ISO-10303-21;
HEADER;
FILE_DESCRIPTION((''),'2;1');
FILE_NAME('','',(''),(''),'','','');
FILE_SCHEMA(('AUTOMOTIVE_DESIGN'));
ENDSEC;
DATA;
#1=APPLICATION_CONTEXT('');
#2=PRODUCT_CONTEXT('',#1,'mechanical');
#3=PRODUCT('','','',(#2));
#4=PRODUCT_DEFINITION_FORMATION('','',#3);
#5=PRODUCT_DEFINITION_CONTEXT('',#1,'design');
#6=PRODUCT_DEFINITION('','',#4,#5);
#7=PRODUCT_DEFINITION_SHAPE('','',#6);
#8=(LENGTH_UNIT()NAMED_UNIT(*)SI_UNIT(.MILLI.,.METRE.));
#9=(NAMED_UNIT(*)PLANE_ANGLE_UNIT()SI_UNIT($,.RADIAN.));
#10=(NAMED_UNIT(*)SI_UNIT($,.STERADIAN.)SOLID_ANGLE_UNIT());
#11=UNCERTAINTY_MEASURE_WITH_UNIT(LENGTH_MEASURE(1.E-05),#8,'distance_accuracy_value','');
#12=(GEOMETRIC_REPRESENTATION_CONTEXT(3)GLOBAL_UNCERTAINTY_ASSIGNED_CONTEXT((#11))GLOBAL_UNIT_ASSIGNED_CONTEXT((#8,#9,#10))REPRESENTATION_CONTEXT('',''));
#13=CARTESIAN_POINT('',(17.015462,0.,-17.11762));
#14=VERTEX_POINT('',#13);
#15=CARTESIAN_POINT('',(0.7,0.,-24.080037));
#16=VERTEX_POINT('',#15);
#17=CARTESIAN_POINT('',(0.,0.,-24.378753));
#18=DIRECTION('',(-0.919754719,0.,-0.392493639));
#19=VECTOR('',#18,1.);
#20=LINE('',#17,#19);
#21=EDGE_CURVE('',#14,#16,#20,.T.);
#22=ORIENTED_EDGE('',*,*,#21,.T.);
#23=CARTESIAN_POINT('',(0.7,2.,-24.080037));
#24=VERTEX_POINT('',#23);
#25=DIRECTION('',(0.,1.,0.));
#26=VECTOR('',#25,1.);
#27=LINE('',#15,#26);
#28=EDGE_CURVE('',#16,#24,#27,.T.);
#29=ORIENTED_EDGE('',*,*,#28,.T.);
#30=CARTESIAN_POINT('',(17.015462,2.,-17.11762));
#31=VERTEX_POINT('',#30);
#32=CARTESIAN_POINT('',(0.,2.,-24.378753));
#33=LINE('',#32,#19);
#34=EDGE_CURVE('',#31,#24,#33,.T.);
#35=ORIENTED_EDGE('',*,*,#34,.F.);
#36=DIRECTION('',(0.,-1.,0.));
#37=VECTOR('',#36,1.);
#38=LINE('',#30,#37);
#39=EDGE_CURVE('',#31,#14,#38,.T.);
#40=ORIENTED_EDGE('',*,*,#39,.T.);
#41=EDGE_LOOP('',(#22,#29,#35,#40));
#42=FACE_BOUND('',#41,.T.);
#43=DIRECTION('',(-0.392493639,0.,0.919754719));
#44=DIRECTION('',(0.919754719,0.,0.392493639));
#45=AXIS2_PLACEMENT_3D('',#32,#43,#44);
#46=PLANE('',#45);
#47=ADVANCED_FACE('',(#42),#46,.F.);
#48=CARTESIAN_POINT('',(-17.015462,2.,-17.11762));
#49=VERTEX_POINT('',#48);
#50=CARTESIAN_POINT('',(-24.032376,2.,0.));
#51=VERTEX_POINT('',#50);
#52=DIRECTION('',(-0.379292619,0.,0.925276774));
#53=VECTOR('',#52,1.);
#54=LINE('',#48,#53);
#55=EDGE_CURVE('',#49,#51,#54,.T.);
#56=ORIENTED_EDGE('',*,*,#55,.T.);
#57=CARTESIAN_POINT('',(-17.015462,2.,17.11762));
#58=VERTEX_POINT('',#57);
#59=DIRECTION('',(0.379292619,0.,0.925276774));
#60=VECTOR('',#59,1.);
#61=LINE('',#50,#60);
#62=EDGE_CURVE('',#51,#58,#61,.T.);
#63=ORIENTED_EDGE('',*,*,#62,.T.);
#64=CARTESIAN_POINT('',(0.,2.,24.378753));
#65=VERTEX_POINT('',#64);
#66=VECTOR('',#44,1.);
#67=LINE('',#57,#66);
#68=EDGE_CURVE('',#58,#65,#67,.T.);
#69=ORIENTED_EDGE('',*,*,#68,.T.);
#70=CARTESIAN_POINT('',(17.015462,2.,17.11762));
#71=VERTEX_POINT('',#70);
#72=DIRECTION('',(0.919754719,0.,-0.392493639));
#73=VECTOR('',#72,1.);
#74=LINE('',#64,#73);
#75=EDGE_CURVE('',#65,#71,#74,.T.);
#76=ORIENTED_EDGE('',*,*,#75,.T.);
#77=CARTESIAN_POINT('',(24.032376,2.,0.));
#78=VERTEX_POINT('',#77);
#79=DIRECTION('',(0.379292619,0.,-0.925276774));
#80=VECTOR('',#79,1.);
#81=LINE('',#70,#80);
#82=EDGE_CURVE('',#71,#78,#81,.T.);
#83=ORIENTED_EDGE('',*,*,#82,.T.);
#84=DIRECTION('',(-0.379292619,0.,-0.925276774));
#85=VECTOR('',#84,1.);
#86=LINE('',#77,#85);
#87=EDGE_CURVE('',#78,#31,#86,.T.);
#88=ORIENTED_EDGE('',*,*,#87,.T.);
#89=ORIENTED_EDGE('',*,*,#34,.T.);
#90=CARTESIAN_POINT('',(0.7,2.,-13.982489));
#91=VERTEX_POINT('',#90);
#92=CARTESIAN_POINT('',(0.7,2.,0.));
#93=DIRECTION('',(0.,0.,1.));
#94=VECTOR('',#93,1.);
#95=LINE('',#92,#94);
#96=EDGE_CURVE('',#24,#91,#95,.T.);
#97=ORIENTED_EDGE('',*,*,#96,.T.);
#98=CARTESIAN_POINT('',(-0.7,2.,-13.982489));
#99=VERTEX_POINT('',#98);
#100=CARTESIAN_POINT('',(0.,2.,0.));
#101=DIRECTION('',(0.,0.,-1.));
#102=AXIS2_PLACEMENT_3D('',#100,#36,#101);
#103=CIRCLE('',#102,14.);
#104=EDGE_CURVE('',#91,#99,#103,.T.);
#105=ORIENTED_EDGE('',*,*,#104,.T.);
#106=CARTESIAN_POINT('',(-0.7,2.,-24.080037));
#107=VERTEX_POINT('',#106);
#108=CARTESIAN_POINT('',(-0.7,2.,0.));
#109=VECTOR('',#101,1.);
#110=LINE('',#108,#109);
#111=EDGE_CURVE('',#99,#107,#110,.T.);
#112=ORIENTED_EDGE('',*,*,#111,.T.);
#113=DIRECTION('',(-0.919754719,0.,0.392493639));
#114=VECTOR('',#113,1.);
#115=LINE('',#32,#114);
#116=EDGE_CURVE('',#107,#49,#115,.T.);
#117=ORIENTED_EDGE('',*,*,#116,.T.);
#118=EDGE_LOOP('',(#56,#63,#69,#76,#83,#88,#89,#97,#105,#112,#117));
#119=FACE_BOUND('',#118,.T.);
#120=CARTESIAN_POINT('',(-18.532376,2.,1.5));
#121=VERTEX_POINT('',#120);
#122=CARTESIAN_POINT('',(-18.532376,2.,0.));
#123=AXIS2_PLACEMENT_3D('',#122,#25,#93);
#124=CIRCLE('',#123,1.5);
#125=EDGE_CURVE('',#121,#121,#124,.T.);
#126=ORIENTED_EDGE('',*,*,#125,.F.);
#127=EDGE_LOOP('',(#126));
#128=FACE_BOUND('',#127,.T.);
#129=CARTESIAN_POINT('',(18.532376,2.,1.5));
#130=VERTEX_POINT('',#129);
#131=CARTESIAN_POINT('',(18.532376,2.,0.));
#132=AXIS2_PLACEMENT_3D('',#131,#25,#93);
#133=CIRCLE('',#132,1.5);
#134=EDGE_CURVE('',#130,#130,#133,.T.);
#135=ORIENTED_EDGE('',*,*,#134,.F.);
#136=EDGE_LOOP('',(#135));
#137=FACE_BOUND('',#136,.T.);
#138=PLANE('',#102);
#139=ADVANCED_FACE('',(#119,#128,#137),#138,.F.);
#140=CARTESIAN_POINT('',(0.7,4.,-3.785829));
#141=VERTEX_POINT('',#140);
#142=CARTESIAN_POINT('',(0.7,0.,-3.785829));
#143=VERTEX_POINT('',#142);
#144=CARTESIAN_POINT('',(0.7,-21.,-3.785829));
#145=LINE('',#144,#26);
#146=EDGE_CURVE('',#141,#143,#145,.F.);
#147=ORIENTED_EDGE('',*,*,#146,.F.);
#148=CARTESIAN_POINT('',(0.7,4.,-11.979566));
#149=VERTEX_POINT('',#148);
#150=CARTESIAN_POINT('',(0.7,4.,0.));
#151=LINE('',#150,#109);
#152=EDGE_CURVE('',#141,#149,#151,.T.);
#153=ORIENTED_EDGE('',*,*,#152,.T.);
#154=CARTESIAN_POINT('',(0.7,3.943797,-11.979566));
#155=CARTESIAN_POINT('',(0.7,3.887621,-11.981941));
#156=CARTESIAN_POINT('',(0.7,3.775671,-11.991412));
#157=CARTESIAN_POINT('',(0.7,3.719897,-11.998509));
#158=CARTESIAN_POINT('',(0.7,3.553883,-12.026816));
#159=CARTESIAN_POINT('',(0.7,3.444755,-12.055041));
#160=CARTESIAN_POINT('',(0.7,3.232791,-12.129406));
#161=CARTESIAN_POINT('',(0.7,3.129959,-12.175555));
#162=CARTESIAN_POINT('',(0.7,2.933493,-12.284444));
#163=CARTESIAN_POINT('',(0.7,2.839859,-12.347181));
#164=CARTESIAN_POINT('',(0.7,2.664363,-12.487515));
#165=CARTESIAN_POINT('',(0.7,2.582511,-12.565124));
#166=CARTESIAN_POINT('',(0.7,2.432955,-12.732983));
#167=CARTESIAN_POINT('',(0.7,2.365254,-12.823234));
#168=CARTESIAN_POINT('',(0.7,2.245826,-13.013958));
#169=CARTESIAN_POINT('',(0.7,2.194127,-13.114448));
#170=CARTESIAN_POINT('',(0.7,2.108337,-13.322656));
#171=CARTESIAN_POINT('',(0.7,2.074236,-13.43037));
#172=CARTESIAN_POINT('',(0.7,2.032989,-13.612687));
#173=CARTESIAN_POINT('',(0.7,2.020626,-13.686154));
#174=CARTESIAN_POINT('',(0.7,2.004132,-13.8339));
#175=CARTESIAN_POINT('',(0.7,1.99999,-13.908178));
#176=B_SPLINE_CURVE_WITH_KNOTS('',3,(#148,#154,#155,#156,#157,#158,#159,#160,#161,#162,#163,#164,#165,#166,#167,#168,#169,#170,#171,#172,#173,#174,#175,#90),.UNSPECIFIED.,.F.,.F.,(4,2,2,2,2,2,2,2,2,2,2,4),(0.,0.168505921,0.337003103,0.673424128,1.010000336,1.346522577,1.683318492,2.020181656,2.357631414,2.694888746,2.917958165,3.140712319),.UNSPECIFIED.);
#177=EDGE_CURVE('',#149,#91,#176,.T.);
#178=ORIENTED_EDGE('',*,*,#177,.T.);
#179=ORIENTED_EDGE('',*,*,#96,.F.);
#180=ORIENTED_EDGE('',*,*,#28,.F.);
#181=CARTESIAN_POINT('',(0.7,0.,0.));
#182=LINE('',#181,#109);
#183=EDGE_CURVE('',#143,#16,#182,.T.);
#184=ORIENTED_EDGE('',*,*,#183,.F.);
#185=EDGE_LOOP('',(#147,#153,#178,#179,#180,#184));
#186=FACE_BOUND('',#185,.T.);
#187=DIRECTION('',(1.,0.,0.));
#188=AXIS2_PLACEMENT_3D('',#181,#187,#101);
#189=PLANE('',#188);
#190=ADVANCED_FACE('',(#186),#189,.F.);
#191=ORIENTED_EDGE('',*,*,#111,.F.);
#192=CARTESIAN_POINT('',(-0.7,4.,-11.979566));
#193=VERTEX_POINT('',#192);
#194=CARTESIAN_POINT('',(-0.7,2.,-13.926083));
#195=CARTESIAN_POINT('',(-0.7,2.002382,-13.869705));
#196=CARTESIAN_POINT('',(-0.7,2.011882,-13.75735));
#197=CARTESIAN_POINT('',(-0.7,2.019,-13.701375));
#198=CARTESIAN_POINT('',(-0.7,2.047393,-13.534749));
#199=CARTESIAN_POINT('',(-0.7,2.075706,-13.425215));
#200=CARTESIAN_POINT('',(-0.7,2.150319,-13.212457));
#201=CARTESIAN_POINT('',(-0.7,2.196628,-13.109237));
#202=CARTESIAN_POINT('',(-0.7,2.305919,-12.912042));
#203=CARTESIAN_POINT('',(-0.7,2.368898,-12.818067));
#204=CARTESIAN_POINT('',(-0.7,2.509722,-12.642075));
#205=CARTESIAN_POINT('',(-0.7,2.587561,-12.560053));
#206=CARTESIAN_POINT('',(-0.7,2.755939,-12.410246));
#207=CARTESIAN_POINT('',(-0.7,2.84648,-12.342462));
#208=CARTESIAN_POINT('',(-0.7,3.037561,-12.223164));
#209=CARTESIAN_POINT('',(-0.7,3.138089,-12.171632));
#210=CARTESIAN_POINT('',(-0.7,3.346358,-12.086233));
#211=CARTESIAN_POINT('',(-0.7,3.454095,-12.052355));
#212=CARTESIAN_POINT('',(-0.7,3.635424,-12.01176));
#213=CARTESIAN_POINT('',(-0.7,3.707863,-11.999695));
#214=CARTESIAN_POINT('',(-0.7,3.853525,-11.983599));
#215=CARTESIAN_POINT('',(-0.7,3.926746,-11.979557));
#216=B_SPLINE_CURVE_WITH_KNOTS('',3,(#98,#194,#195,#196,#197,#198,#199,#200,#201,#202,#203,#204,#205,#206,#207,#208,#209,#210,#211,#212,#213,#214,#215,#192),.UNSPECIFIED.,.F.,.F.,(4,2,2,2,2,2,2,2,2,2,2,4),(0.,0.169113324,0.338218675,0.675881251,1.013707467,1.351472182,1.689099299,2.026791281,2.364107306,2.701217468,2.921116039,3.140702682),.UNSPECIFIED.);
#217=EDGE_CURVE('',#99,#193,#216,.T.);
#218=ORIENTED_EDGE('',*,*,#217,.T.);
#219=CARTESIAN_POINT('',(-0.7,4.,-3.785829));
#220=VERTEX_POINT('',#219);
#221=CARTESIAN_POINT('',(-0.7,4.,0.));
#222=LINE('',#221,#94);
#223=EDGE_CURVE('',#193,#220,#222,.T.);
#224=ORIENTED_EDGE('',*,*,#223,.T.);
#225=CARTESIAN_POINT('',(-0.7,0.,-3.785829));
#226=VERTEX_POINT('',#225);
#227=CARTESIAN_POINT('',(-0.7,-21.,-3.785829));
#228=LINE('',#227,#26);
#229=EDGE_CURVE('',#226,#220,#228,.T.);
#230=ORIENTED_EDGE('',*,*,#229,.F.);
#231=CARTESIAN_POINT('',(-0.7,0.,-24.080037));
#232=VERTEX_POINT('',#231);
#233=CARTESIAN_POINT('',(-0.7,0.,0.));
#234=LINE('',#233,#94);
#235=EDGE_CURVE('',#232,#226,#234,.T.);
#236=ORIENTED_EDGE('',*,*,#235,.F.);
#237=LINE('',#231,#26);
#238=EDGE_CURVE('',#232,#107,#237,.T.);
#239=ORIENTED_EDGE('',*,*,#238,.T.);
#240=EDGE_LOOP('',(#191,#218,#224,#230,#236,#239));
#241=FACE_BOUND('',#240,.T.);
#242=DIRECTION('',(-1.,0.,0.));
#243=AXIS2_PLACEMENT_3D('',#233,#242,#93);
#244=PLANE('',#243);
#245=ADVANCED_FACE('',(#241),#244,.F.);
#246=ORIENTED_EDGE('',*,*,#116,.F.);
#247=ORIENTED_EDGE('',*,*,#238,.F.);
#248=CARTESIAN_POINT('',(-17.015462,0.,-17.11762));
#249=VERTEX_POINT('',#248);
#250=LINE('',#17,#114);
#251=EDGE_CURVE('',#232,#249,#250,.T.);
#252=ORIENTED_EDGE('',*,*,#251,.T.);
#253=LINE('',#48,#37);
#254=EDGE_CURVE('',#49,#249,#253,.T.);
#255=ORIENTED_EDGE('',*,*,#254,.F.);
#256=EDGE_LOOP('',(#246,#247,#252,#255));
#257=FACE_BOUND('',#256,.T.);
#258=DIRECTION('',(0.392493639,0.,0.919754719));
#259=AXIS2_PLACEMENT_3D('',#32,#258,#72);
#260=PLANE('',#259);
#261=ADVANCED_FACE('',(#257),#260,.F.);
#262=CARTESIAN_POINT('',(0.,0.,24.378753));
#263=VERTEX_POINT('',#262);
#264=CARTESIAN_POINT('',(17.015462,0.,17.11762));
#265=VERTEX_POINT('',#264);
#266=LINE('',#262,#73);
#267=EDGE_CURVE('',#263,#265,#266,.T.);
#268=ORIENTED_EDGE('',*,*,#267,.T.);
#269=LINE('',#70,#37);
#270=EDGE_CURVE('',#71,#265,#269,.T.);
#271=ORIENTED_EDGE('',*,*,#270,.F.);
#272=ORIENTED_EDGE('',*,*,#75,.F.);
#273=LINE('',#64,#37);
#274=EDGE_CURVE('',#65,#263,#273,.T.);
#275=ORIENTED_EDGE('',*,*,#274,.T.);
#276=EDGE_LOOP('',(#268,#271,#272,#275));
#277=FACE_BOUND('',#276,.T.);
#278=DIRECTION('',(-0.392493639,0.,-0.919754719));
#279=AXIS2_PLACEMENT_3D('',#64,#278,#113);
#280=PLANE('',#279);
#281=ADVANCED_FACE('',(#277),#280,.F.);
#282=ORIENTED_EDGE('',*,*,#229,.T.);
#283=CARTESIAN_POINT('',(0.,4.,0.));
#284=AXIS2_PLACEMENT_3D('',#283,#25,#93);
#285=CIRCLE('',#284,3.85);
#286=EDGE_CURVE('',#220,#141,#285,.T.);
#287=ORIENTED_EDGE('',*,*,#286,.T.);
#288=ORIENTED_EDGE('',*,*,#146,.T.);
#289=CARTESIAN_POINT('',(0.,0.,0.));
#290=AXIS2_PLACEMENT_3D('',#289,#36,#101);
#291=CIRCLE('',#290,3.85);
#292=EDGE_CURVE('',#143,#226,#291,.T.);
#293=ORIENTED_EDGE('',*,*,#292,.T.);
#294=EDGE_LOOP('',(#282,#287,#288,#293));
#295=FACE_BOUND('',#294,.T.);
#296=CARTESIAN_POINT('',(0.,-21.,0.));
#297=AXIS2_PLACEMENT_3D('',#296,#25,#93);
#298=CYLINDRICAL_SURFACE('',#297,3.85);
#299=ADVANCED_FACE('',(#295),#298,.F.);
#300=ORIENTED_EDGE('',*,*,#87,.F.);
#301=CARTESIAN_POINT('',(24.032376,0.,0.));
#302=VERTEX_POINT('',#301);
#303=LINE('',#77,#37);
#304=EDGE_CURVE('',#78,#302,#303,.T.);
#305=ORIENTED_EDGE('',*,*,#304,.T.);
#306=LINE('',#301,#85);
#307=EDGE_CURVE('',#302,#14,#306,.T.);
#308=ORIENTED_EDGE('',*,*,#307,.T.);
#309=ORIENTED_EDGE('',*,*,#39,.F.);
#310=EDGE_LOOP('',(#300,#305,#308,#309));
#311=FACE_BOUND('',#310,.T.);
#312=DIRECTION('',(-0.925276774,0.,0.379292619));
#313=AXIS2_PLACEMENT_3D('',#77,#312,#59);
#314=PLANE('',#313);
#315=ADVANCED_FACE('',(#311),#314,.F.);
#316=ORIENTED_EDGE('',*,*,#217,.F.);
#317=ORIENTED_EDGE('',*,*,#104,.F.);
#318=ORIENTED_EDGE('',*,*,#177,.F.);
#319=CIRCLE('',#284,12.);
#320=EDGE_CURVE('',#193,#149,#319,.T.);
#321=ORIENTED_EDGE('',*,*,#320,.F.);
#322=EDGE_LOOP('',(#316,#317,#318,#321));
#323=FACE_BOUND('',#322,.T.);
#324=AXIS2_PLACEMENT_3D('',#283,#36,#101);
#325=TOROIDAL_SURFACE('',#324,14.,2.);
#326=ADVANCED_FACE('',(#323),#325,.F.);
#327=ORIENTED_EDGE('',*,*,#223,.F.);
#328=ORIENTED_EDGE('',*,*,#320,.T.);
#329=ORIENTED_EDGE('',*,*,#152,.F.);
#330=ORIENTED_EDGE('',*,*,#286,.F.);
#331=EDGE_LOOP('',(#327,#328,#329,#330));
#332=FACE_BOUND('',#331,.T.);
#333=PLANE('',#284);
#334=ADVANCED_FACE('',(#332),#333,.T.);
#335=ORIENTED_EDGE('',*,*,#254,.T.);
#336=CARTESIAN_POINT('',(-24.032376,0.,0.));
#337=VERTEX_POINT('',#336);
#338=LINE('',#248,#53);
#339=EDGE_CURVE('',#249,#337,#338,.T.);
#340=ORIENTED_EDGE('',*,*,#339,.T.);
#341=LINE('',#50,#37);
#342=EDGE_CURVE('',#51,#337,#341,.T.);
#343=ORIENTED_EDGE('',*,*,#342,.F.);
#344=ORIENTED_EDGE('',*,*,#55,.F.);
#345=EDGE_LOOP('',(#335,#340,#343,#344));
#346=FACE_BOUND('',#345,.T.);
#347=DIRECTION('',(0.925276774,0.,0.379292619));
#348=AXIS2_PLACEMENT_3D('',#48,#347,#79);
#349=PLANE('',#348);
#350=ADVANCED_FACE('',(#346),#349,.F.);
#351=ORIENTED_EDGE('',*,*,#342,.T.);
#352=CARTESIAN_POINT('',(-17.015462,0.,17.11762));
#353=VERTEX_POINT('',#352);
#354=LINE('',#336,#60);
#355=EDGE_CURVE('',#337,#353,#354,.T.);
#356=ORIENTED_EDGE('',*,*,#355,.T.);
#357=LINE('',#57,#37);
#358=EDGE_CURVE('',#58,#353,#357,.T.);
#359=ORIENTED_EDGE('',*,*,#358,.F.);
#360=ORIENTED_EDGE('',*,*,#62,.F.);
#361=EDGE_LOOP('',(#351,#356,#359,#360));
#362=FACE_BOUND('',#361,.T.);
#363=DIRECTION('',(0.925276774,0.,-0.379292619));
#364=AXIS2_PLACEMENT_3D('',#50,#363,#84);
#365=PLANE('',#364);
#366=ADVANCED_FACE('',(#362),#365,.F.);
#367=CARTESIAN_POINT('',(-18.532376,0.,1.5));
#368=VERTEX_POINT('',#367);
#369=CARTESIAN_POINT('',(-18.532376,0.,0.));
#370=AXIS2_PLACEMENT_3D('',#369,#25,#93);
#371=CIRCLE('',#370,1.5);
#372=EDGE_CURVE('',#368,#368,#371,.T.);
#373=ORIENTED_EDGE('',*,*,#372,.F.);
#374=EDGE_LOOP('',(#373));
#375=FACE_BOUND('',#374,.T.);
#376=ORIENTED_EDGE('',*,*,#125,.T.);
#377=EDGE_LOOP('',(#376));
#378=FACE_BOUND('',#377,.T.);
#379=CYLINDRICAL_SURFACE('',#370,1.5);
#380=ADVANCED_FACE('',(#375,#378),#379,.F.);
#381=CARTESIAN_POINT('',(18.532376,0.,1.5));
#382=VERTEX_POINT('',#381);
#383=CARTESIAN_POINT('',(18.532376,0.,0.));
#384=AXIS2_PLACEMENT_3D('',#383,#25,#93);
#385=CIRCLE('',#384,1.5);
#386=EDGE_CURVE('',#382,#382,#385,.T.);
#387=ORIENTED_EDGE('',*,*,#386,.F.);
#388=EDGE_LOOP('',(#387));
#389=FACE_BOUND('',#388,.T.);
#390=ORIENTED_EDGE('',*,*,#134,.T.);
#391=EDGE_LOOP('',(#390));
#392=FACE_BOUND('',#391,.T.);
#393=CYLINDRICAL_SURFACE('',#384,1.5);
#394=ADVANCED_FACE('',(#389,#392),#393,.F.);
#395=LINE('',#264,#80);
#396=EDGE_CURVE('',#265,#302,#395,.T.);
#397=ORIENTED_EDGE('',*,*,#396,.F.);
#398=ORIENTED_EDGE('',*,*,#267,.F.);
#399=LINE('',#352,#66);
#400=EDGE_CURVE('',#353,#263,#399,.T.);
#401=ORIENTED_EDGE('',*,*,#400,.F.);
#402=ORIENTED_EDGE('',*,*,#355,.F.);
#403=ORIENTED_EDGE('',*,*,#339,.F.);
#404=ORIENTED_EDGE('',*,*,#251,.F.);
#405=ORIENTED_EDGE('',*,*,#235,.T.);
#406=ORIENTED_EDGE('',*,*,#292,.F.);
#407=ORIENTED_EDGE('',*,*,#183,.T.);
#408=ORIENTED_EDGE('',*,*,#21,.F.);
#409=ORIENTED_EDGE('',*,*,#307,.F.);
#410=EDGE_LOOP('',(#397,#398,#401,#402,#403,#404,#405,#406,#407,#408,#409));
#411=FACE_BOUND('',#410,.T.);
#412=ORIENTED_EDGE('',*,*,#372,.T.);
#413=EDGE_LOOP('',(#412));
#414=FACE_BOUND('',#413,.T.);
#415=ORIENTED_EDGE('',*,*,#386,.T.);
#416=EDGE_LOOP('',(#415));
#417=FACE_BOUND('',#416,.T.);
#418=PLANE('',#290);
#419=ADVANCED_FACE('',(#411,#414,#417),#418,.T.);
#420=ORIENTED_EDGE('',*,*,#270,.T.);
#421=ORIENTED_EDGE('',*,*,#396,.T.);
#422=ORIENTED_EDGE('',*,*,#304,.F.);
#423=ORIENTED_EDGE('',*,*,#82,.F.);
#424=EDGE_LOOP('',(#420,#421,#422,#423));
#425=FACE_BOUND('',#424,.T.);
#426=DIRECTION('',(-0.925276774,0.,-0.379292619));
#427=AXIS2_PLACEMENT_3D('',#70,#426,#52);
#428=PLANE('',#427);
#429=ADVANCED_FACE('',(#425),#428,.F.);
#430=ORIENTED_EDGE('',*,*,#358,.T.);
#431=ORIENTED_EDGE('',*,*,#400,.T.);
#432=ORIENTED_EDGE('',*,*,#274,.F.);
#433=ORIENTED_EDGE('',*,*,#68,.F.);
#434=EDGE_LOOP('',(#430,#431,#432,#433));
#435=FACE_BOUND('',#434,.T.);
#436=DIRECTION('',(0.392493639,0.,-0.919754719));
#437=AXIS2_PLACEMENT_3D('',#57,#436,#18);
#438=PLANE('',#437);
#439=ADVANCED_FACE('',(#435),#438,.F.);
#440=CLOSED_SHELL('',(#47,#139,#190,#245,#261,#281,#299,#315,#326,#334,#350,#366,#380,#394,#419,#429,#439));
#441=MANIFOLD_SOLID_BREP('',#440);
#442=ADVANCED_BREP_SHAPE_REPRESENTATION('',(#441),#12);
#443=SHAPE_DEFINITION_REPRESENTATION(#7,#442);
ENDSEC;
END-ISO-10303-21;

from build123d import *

# Parameters (mm, degrees)
BOSS_EXTRUDE1_DEPTH = 2
SKETCH2_R           = 12
BOSS_EXTRUDE2_DEPTH = 2
SKETCH3_R           = 3.85
CUT_EXTRUDE1_DEPTH  = 25
CUT_EXTRUDE2_DEPTH  = 35.465615693
FILLET2_R           = 2
SKETCH6_R           = 1.5
CUT_EXTRUDE3_DEPTH  = 35.29108726


with BuildPart() as part:
    # Sketch1 → Boss-Extrude1 (new body)
    with BuildSketch(Plane(origin=(0, 0, 0), x_dir=(1, 0, 0), z_dir=(0, 1, 0))):
        Polygon((0, 24.378752643), (-17.015462305, 17.117620324), (-24.03237576, 0), (-17.015462305, -17.117620324), (0, -24.378752643), (17.015462305, -17.117620324), (24.03237576, 0), (17.015462305, 17.117620324), align=None)
    extrude(amount=BOSS_EXTRUDE1_DEPTH)

    # Sketch2 → Boss-Extrude2 (add)
    with BuildSketch(Plane(origin=(0, 2, 0), x_dir=(1, 0, 0), z_dir=(0, 1, 0))):
        with Locations(Location((0, 0, 0), (0, 0, 270))):
            Circle(SKETCH2_R)
    extrude(amount=BOSS_EXTRUDE2_DEPTH)

    # Sketch3 → Cut-Extrude1 (cut)
    with BuildSketch(Plane(origin=(0, 4, 0), x_dir=(1, 0, 0), z_dir=(0, 1, 0))):
        with Locations(Location((0, 0, 0), (0, 0, 270))):
            Circle(SKETCH3_R)
    extrude(amount=-CUT_EXTRUDE1_DEPTH, mode=Mode.SUBTRACT)

    # Sketch4 → Cut-Extrude2 (cut, through all)
    with BuildSketch(Plane(origin=(0, 4, 0), x_dir=(1, 0, 0), z_dir=(0, 1, 0))):
        Polygon((0.7, 0), (0.7, 24.080036538), (0, 24.378752643), (-0.7, 24.080036538), (-0.7, 0), align=None)
    extrude(amount=-CUT_EXTRUDE2_DEPTH, mode=Mode.SUBTRACT)

    # Fillet2
    fillet2_edges = [part.edges().sort_by_distance(p)[0] for p in [
        (-11.994890396, 2, 0.350149094),
    ]]
    fillet(fillet2_edges, radius=FILLET2_R - 0.0001)  # a hair under: the kernel refuses the full size

    # Sketch6 → Cut-Extrude3 (cut, through all)
    with BuildSketch(Plane(origin=(0, 2, 0), x_dir=(1, 0, 0), z_dir=(0, 1, 0))):
        with Locations(Location((-18.53237576, 0, 0), (0, 0, 270))):
            Circle(SKETCH6_R)
        with Locations(Location((18.53237576, 0, 0), (0, 0, 270))):
            Circle(SKETCH6_R)
    extrude(amount=-CUT_EXTRUDE3_DEPTH, mode=Mode.SUBTRACT)


solid = part.part
